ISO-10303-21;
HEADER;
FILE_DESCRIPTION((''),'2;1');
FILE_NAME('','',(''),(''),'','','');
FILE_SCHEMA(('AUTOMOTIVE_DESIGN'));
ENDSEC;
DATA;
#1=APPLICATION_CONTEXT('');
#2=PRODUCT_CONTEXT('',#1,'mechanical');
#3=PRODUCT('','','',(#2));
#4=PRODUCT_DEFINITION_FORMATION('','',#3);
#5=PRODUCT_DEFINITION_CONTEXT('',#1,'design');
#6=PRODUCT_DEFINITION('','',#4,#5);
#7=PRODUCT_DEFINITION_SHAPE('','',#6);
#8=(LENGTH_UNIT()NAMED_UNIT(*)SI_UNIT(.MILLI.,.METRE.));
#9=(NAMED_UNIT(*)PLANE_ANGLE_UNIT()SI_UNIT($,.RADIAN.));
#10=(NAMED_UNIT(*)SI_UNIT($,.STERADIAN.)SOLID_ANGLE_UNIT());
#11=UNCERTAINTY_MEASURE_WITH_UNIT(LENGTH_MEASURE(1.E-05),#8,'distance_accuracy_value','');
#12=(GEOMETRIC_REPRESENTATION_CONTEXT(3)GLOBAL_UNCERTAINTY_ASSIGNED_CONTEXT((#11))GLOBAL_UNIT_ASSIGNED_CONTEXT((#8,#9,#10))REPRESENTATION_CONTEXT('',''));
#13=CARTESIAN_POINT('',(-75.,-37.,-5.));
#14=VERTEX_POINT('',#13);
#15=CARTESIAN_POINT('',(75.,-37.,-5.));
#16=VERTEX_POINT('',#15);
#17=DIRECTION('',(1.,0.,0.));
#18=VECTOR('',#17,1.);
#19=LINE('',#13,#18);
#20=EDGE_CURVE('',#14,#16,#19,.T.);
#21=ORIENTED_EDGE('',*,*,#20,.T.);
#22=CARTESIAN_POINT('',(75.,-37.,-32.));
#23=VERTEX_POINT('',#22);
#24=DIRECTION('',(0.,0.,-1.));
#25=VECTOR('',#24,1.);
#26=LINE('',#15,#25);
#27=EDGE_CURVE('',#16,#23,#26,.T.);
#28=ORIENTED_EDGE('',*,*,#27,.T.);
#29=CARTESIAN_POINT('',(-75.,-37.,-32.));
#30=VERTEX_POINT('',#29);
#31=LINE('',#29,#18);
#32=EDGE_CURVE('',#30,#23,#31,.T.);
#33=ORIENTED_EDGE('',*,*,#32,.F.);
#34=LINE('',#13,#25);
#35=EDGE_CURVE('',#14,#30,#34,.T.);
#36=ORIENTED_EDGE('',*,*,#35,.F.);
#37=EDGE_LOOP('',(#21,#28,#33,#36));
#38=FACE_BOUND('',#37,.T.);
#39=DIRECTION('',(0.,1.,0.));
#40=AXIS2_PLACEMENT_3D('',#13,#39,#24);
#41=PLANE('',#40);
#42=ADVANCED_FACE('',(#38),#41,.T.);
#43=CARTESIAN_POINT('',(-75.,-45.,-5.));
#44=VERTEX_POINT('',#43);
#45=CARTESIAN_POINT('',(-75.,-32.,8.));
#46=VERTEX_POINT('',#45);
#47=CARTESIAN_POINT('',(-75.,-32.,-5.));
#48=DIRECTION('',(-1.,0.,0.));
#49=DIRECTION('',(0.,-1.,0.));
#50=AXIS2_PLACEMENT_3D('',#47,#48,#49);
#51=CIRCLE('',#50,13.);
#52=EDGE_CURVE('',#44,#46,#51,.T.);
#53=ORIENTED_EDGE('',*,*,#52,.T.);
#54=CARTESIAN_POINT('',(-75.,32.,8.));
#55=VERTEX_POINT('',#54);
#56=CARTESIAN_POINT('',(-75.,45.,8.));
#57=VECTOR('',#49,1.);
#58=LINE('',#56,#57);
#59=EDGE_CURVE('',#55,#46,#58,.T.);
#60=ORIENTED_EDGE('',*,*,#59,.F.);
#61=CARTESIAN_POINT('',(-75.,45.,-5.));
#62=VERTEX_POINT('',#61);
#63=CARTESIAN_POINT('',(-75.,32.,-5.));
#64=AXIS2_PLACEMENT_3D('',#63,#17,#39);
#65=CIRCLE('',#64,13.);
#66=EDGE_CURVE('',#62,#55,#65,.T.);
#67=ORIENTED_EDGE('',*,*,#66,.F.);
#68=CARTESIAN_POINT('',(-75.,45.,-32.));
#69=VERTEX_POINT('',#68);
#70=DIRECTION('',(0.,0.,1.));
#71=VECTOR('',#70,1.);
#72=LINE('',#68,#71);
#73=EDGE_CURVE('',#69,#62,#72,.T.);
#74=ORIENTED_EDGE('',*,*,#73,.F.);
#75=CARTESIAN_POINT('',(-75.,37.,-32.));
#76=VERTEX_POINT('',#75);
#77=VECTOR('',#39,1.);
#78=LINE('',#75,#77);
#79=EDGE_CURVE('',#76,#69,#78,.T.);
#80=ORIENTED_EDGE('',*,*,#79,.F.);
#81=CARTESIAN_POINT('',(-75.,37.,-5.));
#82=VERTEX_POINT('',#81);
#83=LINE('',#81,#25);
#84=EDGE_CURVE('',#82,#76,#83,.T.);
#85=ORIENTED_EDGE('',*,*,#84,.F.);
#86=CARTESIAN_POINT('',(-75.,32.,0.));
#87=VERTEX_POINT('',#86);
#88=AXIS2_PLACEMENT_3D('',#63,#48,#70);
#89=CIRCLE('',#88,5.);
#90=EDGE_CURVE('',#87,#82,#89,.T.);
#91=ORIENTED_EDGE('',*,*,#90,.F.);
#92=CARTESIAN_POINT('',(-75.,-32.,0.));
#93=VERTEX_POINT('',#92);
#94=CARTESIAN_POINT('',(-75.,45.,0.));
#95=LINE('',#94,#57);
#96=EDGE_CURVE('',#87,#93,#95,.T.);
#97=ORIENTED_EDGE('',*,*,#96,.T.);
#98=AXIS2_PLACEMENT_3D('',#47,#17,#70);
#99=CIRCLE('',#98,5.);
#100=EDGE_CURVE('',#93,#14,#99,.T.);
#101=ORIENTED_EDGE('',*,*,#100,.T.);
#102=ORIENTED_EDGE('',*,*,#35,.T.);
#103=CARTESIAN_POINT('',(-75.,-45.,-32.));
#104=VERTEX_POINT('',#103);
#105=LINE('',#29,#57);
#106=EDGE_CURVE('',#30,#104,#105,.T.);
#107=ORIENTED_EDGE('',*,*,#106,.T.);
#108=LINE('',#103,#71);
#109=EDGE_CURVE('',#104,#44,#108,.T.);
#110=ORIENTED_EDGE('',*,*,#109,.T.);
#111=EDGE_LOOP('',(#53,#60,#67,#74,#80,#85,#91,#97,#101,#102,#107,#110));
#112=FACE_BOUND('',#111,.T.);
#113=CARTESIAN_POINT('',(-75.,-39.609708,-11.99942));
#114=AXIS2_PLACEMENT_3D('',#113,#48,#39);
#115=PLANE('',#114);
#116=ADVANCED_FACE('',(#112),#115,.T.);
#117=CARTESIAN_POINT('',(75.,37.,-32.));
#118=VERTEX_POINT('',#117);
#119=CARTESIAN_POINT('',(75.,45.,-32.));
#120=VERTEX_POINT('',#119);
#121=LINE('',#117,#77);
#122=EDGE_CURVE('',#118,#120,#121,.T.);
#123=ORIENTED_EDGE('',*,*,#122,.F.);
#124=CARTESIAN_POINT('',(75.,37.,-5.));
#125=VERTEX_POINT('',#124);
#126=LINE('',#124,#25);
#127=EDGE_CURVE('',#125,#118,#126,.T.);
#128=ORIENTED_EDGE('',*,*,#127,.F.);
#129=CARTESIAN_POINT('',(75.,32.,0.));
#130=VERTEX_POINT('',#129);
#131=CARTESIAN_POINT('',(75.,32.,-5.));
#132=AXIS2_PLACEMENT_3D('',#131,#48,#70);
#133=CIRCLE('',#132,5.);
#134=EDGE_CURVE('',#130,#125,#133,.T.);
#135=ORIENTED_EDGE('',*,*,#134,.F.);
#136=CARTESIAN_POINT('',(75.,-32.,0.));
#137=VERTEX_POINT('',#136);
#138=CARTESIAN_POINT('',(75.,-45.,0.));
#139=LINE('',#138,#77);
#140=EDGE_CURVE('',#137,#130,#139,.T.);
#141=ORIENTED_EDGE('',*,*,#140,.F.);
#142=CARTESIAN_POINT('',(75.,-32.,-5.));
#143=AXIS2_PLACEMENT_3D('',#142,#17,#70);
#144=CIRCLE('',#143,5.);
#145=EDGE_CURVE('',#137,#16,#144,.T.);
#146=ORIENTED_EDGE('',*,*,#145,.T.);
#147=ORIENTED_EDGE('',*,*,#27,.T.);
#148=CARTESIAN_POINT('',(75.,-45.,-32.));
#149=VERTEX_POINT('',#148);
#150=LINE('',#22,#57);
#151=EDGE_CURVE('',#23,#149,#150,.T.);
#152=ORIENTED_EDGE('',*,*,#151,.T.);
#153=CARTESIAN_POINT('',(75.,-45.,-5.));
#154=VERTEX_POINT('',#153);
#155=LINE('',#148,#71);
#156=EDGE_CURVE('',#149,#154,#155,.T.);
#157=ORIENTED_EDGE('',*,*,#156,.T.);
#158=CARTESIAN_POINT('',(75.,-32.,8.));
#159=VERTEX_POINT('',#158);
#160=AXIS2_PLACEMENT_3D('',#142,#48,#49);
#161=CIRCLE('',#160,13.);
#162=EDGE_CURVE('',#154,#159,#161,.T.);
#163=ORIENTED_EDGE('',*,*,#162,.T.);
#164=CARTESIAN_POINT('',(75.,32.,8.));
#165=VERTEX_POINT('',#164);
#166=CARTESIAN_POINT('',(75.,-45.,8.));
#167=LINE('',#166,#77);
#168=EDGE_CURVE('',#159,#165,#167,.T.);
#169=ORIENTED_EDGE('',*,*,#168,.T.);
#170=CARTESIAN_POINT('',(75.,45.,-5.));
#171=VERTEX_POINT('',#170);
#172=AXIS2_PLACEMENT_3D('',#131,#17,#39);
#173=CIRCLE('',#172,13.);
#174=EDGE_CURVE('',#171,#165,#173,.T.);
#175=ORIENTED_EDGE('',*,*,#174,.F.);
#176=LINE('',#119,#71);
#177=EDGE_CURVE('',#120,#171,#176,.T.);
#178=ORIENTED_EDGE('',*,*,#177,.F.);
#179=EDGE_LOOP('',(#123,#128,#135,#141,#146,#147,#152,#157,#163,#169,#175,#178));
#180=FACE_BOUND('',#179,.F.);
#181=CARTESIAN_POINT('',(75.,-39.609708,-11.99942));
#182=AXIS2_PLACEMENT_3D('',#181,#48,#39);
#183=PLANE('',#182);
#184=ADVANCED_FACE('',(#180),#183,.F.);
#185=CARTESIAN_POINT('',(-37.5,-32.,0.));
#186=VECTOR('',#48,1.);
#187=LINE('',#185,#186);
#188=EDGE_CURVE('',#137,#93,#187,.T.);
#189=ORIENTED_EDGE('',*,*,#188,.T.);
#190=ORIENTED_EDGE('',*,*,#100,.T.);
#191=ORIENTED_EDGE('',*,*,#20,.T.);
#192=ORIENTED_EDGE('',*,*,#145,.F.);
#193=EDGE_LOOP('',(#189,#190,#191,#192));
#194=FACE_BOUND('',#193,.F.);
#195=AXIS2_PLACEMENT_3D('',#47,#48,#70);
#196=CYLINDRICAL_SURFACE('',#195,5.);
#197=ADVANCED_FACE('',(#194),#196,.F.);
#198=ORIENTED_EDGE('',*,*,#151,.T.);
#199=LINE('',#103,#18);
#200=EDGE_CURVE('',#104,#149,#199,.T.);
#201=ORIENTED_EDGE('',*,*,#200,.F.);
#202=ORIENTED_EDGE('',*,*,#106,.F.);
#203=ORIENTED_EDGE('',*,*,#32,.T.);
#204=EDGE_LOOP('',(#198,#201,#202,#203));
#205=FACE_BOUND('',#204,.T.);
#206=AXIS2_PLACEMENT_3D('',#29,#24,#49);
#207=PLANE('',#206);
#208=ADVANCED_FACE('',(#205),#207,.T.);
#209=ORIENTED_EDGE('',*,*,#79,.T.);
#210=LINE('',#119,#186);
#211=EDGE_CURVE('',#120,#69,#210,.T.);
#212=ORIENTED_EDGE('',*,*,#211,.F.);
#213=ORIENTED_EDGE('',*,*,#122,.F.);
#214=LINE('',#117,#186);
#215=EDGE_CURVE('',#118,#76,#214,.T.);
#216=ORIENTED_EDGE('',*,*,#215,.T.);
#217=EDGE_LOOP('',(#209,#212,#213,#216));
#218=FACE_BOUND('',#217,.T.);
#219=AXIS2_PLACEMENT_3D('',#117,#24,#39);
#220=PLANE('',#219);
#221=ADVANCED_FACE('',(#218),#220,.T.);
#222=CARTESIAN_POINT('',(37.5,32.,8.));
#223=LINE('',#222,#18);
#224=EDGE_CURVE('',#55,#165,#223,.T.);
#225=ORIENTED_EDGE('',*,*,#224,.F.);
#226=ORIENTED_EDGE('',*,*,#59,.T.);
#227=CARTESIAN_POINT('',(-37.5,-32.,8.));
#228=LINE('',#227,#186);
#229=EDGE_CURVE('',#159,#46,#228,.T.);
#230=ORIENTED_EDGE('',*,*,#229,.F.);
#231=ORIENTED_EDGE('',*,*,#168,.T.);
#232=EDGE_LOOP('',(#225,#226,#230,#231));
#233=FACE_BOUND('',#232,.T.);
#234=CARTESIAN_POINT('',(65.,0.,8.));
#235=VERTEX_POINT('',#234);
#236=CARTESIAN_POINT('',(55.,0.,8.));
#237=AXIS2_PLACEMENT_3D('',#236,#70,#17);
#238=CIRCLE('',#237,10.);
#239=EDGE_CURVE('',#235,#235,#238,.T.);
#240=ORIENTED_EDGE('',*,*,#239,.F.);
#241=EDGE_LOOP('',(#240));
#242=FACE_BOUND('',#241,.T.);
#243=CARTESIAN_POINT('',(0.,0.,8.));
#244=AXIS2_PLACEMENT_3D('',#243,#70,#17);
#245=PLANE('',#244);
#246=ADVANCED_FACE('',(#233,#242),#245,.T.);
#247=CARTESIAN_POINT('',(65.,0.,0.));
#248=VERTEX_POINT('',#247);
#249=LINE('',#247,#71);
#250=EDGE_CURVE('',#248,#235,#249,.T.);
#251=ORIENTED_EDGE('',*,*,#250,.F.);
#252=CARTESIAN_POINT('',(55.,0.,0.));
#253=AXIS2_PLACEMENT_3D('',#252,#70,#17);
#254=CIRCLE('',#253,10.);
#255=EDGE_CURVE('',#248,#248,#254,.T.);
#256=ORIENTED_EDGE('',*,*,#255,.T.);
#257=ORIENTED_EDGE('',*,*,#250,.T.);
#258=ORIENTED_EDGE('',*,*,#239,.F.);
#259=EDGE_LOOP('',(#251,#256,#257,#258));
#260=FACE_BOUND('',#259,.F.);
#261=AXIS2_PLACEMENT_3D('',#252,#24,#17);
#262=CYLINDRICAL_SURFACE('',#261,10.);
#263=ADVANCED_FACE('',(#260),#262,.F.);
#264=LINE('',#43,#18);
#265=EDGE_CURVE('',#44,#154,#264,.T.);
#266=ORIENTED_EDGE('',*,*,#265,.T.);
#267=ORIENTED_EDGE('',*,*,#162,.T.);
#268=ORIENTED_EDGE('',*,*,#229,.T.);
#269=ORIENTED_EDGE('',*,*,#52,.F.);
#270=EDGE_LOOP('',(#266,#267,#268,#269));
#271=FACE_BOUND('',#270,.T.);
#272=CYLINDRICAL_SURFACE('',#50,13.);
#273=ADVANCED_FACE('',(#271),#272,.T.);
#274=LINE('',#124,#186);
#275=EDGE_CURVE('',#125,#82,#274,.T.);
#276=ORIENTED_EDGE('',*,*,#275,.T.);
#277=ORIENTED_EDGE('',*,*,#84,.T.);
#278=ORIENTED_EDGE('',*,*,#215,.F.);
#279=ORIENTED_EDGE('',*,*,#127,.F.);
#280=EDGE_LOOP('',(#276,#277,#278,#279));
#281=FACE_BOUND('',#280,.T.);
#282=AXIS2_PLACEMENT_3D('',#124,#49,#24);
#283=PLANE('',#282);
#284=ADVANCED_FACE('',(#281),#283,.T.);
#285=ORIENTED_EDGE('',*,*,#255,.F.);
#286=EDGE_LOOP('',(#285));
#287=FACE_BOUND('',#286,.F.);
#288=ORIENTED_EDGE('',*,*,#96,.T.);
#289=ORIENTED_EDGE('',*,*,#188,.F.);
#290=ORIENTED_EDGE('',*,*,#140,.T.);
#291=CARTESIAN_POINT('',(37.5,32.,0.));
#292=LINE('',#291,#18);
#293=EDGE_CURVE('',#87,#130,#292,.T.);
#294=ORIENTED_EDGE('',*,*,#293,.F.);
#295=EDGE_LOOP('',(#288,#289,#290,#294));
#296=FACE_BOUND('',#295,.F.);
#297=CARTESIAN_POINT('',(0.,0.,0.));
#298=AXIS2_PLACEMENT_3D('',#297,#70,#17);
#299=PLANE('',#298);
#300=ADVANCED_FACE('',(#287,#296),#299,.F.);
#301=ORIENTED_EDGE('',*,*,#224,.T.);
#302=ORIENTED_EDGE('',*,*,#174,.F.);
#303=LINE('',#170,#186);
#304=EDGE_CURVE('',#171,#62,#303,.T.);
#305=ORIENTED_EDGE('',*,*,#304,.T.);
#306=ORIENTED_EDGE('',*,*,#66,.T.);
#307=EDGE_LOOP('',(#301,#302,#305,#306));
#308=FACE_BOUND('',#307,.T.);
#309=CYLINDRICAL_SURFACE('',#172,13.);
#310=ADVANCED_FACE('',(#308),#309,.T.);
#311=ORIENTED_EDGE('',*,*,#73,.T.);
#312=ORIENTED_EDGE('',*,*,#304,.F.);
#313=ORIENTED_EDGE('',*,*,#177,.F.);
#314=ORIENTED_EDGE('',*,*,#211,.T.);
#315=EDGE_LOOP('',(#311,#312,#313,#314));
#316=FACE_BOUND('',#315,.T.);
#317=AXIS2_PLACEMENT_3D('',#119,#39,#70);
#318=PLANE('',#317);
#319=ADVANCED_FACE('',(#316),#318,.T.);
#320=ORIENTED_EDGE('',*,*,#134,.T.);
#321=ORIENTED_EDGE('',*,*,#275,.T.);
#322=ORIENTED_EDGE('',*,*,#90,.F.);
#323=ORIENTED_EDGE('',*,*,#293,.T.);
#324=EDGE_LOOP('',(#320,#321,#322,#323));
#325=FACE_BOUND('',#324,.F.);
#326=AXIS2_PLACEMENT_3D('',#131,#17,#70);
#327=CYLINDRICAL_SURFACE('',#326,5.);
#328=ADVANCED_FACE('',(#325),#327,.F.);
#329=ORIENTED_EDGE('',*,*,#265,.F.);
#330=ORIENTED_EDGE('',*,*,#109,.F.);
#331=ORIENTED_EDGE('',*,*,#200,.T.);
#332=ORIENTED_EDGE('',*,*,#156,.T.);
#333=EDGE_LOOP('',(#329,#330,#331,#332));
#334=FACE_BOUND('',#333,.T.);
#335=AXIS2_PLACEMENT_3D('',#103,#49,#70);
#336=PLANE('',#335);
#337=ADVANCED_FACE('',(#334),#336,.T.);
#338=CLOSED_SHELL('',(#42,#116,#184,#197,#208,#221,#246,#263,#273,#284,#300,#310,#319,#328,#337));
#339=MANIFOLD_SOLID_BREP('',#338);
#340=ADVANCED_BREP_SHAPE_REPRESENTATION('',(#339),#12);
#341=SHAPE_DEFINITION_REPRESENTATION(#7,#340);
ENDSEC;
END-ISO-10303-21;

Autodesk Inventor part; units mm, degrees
ref_plane "YZ Plane" through (0, 0, 0) normal (1, 0, 0) x (0, 1, 0)
ref_plane "XZ Plane" through (0, 0, 0) normal (0, 1, 0) x (-1, 0, 0)
ref_plane "XY Plane" through (0, 0, 0) normal (0, 0, 1) x (1, 0, 0)
sketch "Sketch1" plane through (0, 0, 0) normal (0, 0, 1) x (1, 0, 0)
  line L0 (-75, -45) -> (75, -45)
  line L1 (75, -45) -> (75, 45)
  line L2 (75, 45) -> (-75, 45)
  line L3 (-75, 45) -> (-75, -45)
  line L4 (-75, -45) -> (75, 45) construction
  line L5 (75, -45) -> (-75, 45) construction
  circle A0 centre (55, -25) radius 10
  circle A1 centre (55, 25) radius 10
  line L6 (0, 0) -> (75, 0) construction
  circle A2 centre (55, 0) radius 10
  dimension "d0" = 150
  dimension "d1" = 90
  dimension "d23" = 20
  dimension "d25" = 20
  dimension "d26" = 20
extrude "Plate1" add sketch "Sketch1" along normal blind 8 contours L3 L2 L1 L0 | A0 | A1
sketch "Sketch6" plane through (-75, -37, 8) normal (0, -1, 0) x (1, 0, 0)
  line L0 (150, 0) -> (0, 0)
  line L1 (0, 0) -> (0, -40)
  line L2 (0, -40) -> (150, -40)
  line L3 (150, -40) -> (150, 0)
edge flange "Flange2" height 40 angle 90 thickness 8 bend radius 5 thickness toward (0, -1, 0) relief round relief width 8 relief depth 4 corner gap 5 corner form 0 edges at (0, -45, 0) (0, 45, 0) wall of the first edge with corners at (75, -37, 8) (-75, -37, 8) (-75, -37, -32) (75, -37, -32)
bend "Bend2"
corner "Corner2"
equation "\"d26\" = d25"
equation "\"d2\" = Thickness"
equation "\"d30\" = BendReliefWidth"
equation "\"d31\" = BendReliefDepth"
equation "\"d32\" = MinimumRemnant"
equation "\"d33\" = TransitionRadius"
equation "\"d36\" = BendRadius"
equation "\"d37\" = CornerReliefSize"
equation "\"d38\" = GapSize"
equation "\"d39\" = JacobiRadiusSize"
equation "\"BendReliefWidth\" = Thickness"
equation "\"BendReliefDepth\" = 0.5 * Thickness"
equation "\"CornerReliefSize\" = 4 * Thickness"
equation "\"MinimumRemnant\" = 2 * Thickness"
equation "\"TransitionRadius\" = BendRadius"
equation "\"JacobiRadiusSize\" = BendRadius"
equation "\"GapSize\" = Thickness"
equation "\"Thickness\" = 8"
equation "\"BendRadius\" = 5"
properties part number "PRS 1785 leg floor channel" material "Steel"
